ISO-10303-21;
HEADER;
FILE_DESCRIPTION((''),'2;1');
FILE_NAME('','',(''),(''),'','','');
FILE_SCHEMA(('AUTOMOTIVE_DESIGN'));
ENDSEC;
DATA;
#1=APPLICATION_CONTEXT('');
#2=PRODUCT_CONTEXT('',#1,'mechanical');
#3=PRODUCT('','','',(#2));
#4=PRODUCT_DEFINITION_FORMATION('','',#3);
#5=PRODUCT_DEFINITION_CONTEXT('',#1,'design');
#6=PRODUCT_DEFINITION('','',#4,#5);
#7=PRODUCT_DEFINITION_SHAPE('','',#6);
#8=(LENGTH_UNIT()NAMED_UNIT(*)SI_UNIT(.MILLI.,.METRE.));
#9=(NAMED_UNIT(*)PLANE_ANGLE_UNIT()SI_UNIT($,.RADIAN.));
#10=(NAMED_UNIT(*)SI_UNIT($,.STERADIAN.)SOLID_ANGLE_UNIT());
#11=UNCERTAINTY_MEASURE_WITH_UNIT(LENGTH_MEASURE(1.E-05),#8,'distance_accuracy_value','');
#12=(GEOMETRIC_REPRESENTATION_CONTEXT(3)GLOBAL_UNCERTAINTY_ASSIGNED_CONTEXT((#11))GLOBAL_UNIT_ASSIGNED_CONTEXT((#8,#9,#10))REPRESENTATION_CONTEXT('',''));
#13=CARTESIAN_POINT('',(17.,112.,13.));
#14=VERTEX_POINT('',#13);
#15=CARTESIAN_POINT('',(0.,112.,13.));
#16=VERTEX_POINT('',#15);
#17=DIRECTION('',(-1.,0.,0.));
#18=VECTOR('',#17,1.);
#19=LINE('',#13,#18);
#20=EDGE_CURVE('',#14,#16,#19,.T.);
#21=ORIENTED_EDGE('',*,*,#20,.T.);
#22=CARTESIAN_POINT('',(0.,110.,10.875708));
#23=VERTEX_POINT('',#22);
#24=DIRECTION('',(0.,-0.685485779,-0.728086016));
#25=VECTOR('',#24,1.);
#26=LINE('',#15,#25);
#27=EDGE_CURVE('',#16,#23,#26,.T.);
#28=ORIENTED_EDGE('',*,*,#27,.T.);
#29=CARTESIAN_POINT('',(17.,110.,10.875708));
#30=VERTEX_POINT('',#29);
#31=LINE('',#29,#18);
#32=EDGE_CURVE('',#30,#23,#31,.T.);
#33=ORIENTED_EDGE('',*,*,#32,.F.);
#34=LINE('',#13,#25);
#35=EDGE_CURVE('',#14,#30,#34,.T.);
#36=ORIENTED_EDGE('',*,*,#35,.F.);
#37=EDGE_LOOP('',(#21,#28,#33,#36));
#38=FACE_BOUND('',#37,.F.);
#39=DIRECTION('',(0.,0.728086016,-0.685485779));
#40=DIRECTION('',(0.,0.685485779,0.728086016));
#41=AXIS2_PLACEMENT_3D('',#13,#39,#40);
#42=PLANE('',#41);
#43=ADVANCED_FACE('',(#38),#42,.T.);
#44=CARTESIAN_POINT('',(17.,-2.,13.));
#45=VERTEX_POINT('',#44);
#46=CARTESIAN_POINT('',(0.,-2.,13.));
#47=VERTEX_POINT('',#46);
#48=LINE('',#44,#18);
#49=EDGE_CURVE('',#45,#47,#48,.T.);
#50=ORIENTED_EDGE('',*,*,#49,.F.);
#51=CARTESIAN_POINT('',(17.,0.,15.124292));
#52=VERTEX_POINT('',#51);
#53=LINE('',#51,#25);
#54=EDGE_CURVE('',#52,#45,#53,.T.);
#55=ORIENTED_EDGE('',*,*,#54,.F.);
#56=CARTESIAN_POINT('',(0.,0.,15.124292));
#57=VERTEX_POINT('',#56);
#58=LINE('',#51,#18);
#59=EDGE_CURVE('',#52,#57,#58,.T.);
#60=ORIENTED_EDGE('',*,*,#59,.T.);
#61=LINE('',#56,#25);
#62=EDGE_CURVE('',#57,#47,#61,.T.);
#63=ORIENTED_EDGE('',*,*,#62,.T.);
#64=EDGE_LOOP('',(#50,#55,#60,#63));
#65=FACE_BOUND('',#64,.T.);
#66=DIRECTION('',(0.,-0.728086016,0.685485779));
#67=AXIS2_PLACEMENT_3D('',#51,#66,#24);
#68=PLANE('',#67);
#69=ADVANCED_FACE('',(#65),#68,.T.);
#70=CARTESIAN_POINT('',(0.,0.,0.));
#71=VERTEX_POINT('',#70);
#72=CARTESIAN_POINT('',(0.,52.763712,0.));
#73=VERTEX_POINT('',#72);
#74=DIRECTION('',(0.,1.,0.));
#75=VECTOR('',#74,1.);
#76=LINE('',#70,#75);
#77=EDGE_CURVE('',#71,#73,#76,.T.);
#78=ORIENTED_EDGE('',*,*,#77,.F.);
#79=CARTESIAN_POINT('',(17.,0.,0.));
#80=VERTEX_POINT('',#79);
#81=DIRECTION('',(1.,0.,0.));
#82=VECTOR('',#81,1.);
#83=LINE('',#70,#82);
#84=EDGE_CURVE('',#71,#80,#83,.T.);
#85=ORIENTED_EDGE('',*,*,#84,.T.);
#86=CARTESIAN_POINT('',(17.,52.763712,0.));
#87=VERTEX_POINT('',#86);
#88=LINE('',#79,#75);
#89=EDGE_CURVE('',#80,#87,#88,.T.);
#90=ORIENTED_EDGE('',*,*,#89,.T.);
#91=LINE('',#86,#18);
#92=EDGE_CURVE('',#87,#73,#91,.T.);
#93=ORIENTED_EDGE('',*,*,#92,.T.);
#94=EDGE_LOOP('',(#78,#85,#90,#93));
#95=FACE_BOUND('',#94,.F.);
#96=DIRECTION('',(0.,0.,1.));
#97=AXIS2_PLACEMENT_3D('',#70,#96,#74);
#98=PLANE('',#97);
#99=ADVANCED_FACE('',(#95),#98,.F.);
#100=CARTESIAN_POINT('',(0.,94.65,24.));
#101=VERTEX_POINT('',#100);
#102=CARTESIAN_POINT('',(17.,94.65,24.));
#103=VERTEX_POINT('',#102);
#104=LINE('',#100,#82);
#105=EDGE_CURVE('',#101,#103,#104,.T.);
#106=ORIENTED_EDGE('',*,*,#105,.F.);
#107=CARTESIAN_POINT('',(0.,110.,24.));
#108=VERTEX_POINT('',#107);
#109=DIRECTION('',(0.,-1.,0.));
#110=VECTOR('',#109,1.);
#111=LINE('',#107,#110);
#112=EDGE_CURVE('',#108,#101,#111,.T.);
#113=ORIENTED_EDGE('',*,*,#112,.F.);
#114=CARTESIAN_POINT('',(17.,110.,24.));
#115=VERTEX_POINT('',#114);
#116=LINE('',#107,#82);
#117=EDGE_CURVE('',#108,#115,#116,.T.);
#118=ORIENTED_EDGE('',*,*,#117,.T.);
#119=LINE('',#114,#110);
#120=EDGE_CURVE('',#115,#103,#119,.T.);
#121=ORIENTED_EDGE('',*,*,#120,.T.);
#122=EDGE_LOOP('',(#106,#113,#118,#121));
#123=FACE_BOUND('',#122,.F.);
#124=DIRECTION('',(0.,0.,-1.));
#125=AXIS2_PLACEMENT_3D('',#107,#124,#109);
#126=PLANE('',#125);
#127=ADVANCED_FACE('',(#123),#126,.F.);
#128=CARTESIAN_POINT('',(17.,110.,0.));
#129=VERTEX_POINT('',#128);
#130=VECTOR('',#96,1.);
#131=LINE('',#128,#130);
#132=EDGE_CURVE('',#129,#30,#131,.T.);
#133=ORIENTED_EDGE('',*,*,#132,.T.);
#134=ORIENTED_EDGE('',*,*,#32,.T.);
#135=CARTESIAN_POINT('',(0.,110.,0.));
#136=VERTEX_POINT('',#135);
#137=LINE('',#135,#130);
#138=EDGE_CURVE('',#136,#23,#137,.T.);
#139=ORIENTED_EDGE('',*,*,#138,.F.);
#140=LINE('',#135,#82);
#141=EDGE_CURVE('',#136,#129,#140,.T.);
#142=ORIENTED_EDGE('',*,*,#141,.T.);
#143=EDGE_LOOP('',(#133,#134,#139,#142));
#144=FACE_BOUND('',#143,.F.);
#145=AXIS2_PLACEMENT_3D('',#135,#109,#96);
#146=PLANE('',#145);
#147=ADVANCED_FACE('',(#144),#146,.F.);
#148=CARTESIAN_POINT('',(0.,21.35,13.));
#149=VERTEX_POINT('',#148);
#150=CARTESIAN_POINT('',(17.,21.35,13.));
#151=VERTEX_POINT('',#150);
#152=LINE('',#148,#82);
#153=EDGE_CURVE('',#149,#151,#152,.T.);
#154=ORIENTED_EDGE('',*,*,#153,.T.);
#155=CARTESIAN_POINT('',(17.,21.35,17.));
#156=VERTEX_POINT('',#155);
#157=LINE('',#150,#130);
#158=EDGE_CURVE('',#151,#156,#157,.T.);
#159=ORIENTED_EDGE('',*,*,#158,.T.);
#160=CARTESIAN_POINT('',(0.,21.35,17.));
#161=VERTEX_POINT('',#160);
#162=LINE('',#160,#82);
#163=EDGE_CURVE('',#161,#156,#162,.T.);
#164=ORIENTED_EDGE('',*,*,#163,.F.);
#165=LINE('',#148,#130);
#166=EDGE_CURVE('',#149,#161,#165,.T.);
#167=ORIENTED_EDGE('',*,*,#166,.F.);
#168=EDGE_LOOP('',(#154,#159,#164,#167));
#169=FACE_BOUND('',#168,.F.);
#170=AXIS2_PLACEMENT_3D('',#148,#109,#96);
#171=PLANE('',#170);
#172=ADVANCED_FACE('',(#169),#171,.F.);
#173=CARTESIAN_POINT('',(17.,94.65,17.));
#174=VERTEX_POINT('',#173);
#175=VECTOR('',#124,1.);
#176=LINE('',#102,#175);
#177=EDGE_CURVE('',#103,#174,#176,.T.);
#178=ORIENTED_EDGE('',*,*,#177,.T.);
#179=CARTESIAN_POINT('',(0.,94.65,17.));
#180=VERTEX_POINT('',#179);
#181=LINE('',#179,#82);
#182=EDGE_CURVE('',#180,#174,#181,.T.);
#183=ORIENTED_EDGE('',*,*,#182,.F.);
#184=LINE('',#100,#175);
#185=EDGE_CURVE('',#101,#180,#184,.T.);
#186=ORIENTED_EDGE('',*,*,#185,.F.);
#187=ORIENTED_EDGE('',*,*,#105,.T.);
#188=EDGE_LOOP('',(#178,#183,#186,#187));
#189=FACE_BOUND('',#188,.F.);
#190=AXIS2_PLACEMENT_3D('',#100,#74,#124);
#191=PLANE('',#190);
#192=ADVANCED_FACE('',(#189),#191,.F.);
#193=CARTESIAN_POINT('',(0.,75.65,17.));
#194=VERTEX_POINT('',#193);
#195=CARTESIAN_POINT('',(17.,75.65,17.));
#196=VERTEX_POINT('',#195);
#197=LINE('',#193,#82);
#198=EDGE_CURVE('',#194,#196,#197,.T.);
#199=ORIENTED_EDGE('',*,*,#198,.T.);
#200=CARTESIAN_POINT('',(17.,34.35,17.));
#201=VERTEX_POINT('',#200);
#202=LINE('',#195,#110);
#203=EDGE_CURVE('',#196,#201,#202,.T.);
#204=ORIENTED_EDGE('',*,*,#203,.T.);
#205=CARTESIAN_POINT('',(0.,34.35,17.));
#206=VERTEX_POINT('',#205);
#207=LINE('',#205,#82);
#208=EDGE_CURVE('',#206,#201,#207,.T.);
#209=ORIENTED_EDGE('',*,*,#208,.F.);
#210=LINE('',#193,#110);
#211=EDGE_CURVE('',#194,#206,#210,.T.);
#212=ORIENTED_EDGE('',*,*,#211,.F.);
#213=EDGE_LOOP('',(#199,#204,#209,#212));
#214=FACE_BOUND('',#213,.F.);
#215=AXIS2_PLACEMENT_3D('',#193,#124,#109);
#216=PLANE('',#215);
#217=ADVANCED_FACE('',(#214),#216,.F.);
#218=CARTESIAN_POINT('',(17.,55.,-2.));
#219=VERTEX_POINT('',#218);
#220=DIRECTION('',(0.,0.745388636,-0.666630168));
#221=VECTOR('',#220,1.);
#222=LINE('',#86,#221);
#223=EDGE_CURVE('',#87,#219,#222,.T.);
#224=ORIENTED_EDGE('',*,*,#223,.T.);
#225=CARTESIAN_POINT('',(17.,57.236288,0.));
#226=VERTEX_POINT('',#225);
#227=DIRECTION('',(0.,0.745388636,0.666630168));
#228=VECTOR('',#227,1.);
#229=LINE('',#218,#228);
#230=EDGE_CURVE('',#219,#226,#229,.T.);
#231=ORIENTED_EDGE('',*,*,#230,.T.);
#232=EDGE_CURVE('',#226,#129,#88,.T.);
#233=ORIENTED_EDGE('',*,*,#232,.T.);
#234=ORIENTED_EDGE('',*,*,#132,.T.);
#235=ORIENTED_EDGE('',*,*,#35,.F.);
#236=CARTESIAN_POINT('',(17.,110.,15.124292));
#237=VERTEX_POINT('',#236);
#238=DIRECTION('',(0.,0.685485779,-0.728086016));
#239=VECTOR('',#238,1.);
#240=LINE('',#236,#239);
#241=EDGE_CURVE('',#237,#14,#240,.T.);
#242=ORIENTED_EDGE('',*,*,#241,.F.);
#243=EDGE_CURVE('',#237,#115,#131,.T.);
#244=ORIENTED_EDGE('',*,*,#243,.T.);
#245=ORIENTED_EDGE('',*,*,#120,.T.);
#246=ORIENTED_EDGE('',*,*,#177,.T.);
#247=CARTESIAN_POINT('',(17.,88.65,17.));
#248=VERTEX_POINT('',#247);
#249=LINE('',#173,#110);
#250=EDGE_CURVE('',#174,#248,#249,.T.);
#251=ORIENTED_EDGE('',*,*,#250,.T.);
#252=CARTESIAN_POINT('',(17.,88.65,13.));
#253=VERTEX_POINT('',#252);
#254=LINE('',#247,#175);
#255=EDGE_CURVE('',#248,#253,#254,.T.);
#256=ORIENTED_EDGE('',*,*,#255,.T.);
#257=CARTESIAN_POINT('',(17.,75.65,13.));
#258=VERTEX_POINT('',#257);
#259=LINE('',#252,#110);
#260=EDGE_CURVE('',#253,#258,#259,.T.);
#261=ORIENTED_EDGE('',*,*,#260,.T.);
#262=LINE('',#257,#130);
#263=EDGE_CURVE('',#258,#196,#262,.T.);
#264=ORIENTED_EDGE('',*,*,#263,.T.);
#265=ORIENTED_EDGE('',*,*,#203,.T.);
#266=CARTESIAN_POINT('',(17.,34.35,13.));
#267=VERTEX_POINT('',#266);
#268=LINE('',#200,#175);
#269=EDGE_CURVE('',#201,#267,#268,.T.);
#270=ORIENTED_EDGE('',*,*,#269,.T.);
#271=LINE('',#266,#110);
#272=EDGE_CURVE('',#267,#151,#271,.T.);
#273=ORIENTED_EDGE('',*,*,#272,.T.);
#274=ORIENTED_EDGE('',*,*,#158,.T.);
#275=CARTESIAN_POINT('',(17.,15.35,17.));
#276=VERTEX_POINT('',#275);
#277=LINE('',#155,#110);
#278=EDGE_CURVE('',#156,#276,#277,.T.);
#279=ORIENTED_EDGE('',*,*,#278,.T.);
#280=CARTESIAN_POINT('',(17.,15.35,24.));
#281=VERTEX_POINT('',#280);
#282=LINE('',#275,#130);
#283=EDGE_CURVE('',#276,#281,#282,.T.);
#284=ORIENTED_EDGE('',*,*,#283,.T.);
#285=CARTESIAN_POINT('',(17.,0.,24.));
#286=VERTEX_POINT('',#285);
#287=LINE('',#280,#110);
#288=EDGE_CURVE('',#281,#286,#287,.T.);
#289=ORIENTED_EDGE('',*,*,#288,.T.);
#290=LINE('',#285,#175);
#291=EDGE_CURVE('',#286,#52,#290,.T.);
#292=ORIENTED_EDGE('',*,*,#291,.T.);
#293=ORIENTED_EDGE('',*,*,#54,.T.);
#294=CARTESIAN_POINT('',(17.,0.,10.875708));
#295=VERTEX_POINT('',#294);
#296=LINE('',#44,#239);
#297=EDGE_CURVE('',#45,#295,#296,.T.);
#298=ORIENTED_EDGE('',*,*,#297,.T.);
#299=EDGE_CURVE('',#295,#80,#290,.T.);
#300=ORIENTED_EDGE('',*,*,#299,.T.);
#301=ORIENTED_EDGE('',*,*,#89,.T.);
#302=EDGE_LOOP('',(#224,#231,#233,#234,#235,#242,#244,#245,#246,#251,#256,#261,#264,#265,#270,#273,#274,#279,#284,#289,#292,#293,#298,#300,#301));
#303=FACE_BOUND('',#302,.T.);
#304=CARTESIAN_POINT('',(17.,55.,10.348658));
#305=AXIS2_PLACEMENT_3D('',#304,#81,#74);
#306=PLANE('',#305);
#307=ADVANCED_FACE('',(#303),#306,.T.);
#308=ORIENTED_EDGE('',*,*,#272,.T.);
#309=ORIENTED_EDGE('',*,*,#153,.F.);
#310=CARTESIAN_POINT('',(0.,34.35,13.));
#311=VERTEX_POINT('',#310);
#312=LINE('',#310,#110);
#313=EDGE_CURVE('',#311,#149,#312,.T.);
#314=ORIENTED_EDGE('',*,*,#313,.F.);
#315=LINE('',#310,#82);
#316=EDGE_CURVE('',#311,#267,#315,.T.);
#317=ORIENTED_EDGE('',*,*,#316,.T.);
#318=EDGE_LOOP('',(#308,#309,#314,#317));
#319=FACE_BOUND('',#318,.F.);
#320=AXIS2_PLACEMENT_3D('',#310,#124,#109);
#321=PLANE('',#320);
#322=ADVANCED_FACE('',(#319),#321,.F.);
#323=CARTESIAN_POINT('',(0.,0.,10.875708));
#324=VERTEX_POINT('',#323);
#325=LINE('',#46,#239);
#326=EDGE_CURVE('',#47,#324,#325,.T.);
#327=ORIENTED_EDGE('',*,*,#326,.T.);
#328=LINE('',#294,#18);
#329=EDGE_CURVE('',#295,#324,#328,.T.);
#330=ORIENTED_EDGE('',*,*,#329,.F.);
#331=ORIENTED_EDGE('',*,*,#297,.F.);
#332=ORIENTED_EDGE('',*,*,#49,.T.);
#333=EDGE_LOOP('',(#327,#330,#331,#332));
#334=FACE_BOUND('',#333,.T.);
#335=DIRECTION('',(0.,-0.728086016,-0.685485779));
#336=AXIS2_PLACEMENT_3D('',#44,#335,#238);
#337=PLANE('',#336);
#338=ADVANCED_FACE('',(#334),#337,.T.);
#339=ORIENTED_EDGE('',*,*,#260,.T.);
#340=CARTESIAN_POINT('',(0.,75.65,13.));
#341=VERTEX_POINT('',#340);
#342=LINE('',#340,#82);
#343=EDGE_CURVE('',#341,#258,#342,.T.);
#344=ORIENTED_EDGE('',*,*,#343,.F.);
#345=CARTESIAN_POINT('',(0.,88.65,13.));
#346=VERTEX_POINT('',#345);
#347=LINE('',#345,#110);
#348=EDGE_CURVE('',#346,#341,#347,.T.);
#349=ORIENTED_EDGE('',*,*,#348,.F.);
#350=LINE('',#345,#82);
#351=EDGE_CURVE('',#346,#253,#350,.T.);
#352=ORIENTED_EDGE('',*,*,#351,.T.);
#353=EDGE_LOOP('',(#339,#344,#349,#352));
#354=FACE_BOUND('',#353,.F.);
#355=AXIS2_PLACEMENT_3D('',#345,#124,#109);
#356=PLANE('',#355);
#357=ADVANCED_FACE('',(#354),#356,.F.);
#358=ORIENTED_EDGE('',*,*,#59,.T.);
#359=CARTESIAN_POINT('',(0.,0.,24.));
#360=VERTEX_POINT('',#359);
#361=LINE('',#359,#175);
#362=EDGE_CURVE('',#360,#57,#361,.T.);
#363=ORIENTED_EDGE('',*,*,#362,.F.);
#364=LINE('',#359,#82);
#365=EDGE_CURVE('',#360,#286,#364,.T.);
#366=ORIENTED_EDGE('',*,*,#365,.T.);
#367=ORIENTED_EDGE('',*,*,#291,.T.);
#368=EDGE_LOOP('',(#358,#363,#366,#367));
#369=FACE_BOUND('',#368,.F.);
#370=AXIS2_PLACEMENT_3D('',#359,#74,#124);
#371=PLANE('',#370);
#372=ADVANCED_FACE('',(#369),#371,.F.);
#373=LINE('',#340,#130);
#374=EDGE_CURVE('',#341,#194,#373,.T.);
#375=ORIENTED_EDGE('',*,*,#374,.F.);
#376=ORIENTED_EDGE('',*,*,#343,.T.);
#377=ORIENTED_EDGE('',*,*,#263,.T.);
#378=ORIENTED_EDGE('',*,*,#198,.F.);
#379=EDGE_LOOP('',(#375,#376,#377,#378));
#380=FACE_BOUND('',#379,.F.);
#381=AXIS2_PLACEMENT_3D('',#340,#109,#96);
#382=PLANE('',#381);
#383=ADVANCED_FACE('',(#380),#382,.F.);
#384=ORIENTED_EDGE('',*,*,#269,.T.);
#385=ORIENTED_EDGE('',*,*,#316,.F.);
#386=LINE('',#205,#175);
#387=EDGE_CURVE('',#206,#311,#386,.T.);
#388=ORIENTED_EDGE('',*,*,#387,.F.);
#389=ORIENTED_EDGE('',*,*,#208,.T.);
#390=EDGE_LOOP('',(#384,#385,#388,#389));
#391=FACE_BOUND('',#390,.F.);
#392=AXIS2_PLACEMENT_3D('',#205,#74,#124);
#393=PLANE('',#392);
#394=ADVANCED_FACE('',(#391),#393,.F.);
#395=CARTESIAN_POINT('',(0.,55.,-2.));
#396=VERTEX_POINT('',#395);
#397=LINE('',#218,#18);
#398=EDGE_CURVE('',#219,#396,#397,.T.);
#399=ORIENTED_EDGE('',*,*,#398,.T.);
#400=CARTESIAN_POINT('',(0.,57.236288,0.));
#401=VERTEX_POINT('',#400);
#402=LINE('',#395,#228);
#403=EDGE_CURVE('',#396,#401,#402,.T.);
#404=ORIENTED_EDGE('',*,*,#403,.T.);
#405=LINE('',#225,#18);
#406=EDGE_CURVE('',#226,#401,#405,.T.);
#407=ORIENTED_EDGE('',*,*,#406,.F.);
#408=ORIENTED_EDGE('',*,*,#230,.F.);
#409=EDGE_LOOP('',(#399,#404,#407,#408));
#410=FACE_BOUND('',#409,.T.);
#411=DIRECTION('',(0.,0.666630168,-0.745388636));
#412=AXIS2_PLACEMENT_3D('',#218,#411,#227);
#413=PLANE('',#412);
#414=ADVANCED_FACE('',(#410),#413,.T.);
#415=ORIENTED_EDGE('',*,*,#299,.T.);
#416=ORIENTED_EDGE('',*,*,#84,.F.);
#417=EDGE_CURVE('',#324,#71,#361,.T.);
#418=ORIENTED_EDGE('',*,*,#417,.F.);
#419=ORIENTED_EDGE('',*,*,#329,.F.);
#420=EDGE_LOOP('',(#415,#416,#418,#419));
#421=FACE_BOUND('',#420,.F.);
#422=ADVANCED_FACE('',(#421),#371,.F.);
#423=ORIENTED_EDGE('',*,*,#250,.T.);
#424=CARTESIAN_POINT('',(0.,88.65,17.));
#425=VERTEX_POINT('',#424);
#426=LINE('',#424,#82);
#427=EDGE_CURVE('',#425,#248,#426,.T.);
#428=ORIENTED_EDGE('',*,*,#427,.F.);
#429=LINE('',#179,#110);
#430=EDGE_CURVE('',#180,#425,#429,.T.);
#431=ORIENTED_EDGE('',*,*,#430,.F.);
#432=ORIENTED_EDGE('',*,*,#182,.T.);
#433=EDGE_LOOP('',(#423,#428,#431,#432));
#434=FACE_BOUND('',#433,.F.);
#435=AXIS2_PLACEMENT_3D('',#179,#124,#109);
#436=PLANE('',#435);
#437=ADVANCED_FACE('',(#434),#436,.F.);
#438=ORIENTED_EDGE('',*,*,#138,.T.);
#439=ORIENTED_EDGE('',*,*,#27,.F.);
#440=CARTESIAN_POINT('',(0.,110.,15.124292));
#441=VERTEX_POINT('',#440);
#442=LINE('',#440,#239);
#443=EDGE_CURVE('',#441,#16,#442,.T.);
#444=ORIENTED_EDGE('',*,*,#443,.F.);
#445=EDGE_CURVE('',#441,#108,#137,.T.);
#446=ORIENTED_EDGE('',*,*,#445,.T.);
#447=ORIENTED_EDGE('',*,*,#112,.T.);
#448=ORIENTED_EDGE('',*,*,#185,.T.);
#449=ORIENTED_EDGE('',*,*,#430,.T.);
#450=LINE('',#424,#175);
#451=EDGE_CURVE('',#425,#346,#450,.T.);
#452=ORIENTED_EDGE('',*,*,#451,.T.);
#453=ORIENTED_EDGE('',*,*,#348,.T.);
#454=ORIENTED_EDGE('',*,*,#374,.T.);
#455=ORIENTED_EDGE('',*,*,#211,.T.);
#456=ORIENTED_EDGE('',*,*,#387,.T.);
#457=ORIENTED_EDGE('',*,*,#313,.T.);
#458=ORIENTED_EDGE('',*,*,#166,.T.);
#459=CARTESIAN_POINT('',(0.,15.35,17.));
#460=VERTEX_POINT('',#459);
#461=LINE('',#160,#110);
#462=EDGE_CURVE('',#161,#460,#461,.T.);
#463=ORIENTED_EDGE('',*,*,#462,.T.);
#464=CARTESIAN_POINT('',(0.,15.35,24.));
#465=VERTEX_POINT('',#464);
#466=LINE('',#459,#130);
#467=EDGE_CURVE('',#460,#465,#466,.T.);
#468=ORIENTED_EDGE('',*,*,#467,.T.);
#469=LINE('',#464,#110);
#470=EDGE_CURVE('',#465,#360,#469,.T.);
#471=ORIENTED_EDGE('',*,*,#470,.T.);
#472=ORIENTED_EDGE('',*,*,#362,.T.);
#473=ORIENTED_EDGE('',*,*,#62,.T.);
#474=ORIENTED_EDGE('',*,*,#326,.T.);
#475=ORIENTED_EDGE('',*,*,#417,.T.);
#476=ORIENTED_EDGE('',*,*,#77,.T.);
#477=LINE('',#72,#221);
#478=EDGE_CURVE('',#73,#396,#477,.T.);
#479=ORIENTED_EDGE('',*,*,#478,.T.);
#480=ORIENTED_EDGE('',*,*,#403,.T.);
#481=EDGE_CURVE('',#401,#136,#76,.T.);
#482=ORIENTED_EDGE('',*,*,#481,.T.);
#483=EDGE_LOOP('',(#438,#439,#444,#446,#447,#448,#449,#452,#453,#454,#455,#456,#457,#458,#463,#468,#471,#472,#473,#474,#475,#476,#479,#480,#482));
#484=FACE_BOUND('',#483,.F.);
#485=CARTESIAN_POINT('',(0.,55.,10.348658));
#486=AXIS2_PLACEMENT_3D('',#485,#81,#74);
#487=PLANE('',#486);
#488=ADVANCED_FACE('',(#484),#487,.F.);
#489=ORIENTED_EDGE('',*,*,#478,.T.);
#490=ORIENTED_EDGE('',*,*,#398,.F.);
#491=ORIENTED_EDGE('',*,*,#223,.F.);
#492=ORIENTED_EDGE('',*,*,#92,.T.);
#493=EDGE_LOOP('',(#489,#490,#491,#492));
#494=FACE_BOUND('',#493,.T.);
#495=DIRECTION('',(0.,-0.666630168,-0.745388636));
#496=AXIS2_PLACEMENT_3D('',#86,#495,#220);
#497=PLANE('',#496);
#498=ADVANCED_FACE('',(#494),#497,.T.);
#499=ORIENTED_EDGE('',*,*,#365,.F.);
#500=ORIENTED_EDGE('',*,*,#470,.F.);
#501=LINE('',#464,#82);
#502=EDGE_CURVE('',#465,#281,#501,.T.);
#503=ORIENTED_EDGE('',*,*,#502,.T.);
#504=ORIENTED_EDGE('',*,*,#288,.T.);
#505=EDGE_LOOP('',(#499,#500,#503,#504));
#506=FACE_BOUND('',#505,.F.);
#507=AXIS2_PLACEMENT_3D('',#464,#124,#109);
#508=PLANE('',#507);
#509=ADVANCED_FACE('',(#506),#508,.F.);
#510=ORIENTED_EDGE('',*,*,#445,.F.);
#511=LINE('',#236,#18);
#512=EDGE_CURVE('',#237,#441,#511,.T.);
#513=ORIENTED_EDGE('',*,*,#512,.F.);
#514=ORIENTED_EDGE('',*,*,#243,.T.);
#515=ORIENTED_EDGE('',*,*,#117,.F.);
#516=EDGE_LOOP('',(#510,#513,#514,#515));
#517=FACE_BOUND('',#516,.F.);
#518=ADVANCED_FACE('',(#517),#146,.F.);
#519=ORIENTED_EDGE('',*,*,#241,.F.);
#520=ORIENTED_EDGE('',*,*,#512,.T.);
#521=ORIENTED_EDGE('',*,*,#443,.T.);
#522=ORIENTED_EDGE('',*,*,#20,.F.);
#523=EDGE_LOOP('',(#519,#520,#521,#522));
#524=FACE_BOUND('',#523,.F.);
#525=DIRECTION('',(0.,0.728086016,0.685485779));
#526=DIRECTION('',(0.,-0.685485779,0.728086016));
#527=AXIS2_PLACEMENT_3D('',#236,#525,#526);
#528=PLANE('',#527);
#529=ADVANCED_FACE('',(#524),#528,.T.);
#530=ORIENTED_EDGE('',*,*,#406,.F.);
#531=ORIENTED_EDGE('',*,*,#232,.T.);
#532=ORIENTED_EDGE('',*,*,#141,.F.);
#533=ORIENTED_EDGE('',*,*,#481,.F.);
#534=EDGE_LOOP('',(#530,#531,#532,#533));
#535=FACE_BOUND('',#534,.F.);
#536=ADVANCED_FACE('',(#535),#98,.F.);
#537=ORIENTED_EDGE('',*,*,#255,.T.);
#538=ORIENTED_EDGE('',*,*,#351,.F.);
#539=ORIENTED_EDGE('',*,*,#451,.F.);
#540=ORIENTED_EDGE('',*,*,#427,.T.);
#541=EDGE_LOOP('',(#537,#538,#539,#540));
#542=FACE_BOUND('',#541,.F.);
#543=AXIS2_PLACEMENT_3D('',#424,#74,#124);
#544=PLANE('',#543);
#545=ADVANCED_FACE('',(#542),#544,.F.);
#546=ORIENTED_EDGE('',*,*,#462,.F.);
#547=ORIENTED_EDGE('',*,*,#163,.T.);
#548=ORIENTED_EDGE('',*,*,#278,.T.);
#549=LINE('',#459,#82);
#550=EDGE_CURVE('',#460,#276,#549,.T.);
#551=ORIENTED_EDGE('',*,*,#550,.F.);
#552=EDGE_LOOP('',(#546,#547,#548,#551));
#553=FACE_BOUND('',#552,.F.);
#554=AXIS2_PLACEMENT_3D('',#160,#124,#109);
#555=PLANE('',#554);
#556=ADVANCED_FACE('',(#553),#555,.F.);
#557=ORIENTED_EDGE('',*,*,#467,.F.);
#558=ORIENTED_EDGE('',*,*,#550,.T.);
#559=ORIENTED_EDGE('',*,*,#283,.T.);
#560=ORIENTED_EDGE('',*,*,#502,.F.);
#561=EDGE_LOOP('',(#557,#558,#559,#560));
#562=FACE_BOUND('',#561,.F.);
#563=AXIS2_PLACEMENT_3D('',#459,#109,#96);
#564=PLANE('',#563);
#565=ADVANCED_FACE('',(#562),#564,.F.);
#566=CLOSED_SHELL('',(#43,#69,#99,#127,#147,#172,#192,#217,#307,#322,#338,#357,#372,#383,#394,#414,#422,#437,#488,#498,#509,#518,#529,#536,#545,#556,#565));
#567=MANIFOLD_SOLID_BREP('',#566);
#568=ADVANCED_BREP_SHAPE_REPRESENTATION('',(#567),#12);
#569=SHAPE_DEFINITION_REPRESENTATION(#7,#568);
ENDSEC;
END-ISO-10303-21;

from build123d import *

# Parameters (mm, degrees)
F1_DEPTH = 17
F3_DEPTH = 17
F5_DEPTH = 17


# Not quite as in the source:
# - a pattern or mirror of a feature is missing from the dataset's text; its kind, count and spacing are read off the source's solid


with BuildPart() as f1:
    # F0 (on Right) → F1 (new body)
    with BuildSketch(Plane.YZ):
        Polygon((0, 24), (0, 0), (110, 0), (110, 24), (94.65, 24), (94.65, 17), (88.65, 17), (88.65, 13), (75.65, 13), (75.65, 17), (34.35, 17), (34.35, 13), (21.35, 13), (21.35, 17), (15.35, 17), (15.35, 24), align=None)
    extrude(amount=F1_DEPTH)

    # F2 (on face) → F3 (join, through all)
    with BuildSketch(Plane.YZ.offset(17)):
        Polygon((57.2362883389, 0), (55, 0), (55, -2), align=None)
        Polygon((55, 0), (52.7637116611, 0), (55, -2), align=None)
    extrude(amount=-F3_DEPTH)

    # F4 (on face) → F5 (join, through all)
    with BuildSketch(Plane.YZ.offset(17)):
        Polygon((0, 10.8757078871), (0, 13), (-2, 13), align=None)
        Polygon((-2, 13), (0, 13), (0, 15.1242921129), align=None)
    f5 = extrude(amount=-F5_DEPTH)

    # F5_copies: F5 across plane
    add(f5.mirror(Plane.ZX.offset(55)))


solid = f1.part
